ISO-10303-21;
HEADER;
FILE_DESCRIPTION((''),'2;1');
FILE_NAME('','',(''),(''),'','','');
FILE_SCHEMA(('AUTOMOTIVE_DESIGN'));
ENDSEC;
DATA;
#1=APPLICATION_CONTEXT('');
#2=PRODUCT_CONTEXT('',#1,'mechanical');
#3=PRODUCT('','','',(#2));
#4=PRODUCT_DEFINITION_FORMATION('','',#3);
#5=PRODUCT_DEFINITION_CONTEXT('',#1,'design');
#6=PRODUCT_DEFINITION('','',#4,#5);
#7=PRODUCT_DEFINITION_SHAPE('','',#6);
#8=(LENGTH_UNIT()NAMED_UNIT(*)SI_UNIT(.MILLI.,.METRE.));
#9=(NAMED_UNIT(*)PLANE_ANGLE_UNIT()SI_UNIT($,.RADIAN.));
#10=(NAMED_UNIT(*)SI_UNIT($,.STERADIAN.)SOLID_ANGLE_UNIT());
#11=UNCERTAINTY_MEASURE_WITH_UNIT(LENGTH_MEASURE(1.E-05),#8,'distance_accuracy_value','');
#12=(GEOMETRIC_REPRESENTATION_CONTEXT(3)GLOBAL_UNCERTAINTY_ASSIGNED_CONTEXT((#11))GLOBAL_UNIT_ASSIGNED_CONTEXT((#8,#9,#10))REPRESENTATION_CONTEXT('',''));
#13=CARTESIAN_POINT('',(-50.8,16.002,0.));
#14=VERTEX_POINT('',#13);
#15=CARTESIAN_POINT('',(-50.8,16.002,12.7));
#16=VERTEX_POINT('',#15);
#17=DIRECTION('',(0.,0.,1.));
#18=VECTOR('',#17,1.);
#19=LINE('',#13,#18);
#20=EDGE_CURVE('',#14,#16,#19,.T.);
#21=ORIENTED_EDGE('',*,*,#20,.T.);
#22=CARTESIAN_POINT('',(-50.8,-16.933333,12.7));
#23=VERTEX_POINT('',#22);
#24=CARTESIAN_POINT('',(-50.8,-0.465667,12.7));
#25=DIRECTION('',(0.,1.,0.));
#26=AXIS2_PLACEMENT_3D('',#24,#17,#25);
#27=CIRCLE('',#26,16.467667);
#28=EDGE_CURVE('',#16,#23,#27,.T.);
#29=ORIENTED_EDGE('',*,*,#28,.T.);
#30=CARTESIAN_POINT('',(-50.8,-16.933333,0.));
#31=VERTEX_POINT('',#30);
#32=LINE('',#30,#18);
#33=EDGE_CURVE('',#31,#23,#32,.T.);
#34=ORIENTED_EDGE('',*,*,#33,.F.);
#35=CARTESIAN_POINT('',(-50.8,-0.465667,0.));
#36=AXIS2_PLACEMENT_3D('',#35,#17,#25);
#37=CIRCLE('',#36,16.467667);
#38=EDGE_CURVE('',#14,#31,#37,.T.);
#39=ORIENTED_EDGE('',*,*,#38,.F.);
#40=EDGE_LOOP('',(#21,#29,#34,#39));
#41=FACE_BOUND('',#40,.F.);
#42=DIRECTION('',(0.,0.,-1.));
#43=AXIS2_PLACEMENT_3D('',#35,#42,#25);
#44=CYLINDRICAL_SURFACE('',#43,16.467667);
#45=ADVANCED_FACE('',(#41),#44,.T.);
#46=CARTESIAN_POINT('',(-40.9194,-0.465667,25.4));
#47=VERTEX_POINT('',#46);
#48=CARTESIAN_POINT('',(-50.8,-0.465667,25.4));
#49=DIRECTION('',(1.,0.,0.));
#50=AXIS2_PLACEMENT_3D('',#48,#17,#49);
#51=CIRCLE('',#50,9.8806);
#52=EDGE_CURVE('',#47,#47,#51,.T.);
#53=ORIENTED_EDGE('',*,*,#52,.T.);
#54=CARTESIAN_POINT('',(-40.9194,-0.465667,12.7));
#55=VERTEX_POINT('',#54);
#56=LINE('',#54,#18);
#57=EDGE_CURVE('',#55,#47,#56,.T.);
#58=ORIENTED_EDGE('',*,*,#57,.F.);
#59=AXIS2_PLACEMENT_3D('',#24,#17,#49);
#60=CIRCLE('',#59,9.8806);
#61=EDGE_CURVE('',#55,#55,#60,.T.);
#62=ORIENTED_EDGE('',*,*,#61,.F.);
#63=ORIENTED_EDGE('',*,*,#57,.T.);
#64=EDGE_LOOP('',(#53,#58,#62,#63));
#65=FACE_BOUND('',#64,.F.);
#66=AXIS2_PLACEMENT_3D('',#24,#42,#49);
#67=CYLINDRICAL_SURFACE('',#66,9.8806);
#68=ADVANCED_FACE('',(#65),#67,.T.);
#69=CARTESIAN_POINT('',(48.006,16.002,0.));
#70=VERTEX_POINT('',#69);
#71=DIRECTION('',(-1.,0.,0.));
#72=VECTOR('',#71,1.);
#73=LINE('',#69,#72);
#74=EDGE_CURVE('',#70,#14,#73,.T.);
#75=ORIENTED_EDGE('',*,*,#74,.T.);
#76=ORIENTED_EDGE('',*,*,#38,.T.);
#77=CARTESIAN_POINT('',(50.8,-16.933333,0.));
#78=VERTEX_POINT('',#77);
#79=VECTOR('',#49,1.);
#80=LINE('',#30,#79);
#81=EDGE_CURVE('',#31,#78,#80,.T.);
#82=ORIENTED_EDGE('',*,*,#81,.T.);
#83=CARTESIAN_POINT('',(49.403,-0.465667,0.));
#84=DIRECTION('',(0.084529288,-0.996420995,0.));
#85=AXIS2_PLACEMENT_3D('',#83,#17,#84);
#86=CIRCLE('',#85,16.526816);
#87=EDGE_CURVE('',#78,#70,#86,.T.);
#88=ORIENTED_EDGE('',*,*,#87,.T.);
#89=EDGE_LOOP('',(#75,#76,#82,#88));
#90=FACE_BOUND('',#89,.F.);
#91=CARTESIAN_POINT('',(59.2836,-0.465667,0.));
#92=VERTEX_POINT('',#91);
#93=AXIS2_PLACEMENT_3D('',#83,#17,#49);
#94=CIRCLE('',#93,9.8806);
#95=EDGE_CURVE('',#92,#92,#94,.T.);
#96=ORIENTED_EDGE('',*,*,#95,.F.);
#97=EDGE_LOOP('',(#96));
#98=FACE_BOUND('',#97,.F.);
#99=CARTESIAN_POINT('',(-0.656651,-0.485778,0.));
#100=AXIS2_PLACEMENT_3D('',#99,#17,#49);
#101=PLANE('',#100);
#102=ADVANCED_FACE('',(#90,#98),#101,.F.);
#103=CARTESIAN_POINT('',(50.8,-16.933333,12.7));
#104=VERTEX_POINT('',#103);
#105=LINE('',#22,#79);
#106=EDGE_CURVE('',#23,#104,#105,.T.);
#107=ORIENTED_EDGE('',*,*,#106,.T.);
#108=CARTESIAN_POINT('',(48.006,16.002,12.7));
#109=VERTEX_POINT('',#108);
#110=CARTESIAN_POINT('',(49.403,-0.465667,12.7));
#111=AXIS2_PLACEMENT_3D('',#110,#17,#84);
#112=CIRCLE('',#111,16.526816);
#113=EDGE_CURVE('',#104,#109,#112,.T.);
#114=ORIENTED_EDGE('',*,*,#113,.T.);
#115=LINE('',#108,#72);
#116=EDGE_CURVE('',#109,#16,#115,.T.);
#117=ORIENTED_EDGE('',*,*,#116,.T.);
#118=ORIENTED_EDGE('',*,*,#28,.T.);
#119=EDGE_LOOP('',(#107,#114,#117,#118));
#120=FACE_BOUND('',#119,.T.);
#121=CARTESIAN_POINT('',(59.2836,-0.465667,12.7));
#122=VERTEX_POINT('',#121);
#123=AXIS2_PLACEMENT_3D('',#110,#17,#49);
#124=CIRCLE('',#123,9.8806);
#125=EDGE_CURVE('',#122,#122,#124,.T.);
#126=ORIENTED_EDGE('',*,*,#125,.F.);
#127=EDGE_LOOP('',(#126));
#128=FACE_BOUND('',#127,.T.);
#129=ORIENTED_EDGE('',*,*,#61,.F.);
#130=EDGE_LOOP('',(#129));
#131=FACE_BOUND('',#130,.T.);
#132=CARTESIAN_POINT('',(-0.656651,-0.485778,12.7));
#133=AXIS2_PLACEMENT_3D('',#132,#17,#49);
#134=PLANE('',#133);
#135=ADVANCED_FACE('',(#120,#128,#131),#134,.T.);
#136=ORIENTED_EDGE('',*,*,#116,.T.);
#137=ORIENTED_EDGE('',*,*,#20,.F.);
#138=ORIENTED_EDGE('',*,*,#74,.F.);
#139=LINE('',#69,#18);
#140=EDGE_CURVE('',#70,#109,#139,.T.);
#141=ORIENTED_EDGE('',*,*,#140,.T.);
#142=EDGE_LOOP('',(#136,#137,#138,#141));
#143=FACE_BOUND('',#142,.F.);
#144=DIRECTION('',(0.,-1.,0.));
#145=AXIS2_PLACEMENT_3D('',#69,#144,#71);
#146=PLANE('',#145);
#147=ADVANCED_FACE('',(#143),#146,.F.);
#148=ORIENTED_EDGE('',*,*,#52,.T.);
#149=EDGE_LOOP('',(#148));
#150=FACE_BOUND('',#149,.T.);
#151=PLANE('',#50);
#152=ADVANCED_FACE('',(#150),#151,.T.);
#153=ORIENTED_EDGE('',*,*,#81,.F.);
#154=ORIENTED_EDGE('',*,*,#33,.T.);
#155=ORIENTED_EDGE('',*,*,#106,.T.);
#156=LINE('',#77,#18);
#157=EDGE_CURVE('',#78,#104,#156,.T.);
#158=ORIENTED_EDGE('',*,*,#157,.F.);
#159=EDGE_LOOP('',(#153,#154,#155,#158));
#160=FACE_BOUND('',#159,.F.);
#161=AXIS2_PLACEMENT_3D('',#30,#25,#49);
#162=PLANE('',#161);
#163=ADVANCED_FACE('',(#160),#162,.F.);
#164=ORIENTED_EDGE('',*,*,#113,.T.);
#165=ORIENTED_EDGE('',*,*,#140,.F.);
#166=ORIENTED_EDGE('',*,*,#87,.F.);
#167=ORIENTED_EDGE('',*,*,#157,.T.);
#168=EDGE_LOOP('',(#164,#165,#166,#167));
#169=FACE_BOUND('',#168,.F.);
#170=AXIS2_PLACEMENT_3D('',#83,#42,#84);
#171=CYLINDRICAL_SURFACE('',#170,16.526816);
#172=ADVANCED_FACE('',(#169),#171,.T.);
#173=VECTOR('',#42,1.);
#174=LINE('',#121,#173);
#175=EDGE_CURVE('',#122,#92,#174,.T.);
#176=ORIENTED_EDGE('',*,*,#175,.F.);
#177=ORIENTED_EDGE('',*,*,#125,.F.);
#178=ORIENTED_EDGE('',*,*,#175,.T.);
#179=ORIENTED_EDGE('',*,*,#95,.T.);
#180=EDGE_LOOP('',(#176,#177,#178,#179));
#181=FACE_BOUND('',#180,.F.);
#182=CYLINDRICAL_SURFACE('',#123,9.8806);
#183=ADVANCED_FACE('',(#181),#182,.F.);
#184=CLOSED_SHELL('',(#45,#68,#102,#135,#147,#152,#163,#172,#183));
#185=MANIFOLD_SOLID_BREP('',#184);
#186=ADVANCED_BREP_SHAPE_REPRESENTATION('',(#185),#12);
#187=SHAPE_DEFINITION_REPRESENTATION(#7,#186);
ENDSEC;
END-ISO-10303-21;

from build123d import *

# Parameters (mm, degrees)
F2_DEPTH = 12.7
F3_R     = 9.8806
F4_DEPTH = 12.7
F5_DEPTH = 12.7


# Not quite as in the source:
# - a variable given as a bare number and used for a length is read in inches; the dataset says mm whatever the document's units were


with BuildPart() as f2:
    # F1 (on Top) → F2 (new body)
    with BuildSketch(Plane.XY):
        with BuildLine():
            ThreePointArc((50.8, -16.9333333333), (65.8706666667, 0.9313333333), (48.006, 16.002))
            Line((48.006, 16.002), (-50.8, 16.002))
            ThreePointArc((-50.8, 16.002), (-67.2676666667, -0.4656666667), (-50.8, -16.9333333333))
            Line((-50.8, -16.9333333333), (50.8, -16.9333333333))
        make_face()
    extrude(amount=F2_DEPTH)

    # F3 (on face) → F4 (join)
    with BuildSketch(Plane.XY.offset(12.7)):
        with Locations((-50.8, -0.4656666667)):
            Circle(F3_R)
    extrude(amount=F4_DEPTH)

    # F3 (on face) → F5 (cut)
    with BuildSketch(Plane.XY.offset(12.7)):
        with Locations((49.403, -0.4656666667)):
            Circle(F3_R)
    extrude(amount=-F5_DEPTH, mode=Mode.SUBTRACT)


solid = f2.part
